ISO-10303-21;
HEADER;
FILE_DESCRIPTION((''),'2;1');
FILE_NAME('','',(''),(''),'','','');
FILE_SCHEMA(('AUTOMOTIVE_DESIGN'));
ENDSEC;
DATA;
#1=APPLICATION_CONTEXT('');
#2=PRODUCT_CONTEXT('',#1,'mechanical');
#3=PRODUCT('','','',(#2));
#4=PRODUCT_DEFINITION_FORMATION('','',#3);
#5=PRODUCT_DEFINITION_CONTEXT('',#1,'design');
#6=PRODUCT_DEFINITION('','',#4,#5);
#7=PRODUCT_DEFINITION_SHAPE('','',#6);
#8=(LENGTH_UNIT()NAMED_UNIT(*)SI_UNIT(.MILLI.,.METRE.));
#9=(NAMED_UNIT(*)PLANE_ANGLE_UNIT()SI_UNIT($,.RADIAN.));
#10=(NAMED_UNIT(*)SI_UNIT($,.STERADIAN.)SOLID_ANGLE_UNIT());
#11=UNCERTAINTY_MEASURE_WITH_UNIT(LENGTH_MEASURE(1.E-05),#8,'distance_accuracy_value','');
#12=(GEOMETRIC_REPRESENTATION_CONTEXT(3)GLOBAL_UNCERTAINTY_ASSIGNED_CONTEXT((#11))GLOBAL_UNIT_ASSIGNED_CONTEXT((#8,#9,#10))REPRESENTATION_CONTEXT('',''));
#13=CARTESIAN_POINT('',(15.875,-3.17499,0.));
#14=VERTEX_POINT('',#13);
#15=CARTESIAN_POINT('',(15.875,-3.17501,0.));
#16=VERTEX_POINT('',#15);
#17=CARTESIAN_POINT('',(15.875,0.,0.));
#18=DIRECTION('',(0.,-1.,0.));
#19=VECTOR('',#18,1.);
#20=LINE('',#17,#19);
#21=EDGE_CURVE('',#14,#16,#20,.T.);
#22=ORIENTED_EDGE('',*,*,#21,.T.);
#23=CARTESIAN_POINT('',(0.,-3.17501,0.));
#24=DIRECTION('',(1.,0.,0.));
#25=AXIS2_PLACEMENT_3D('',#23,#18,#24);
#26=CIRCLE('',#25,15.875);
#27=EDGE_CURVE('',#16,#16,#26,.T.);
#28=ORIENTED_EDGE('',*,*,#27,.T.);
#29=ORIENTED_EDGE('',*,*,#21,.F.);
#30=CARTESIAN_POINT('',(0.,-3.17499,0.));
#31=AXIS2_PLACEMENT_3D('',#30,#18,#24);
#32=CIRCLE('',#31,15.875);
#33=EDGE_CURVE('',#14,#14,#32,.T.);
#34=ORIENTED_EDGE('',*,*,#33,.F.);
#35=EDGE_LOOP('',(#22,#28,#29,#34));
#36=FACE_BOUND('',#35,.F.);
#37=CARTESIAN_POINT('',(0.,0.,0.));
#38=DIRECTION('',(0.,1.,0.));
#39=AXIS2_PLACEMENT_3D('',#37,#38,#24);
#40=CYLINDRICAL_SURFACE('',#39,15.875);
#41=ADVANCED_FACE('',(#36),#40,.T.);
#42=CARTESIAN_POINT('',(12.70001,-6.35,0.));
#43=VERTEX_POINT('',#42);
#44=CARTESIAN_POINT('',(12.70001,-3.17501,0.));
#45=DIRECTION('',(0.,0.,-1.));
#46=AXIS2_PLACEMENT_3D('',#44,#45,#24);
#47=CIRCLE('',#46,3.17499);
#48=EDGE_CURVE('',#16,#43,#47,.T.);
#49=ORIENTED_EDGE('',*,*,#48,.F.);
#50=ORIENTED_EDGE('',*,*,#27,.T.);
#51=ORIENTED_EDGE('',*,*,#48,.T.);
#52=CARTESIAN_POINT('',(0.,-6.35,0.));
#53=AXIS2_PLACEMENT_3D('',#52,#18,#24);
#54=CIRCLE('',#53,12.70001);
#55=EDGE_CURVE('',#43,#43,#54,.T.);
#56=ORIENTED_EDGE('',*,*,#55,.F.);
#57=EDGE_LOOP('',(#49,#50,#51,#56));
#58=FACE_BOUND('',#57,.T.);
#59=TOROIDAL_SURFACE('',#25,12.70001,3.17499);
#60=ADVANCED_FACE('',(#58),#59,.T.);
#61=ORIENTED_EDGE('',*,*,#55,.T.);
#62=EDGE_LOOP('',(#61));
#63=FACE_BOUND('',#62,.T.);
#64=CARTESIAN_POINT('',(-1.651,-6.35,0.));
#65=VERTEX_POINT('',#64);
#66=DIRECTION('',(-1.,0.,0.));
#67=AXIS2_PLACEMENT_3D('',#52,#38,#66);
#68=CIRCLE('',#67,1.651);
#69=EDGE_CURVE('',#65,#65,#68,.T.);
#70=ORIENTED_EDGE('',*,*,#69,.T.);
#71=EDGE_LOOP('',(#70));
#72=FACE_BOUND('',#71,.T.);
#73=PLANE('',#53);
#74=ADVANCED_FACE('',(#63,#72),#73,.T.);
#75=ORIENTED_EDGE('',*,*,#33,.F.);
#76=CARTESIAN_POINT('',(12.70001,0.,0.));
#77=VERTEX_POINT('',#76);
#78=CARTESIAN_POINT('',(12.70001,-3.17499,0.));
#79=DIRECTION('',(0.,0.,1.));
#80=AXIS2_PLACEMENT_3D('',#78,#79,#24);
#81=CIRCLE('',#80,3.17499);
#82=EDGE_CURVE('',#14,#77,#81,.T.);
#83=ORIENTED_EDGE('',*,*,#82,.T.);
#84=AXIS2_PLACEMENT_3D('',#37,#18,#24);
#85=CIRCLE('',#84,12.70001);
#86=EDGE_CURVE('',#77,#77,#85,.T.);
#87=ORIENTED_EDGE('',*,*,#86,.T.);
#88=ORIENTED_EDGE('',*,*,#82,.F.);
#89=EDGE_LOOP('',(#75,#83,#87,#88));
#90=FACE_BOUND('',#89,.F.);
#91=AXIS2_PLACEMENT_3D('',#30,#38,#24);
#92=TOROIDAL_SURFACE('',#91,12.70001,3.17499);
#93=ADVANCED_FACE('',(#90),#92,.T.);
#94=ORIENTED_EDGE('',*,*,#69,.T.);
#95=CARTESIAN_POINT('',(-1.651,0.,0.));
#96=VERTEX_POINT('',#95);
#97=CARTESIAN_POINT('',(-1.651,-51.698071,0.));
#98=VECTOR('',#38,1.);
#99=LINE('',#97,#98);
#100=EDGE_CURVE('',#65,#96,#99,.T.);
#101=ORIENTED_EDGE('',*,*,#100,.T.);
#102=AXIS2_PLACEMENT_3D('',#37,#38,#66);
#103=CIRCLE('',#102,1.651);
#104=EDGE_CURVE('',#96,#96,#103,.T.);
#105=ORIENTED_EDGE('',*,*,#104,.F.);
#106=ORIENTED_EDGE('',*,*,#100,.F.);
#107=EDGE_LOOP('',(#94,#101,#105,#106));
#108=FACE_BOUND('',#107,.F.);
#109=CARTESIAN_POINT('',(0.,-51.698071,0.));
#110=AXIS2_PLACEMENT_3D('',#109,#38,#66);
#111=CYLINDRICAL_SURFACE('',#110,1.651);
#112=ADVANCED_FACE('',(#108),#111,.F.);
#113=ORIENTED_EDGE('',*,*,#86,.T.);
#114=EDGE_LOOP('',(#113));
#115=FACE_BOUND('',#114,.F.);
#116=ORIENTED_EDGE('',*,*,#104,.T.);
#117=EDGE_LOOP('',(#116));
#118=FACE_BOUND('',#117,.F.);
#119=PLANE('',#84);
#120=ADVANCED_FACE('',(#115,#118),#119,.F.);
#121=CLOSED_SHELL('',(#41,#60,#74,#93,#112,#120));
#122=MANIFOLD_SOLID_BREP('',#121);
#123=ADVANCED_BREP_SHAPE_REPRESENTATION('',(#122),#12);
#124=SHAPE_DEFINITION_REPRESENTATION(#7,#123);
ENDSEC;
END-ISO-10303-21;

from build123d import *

# Parameters (mm, degrees)
F0_R     = 15.875
F1_DEPTH = 6.35
F3_D     = 3.302
F4_R     = 3.17499


# Not quite as in the source:
# - a fillet or chamfer is up to 0.001 mm smaller than in the source, because OpenCascade refuses the exact size


with BuildPart() as f1:
    # F0 (on Front) → F1 (new body)
    with BuildSketch(Plane.XZ):
        Circle(F0_R)
    extrude(amount=F1_DEPTH)

    # F3 (through all)
    with Locations(Plane.XZ.offset(6.35)):
        with Locations((0, 0)):
            Hole(F3_D / 2)

    # F4 (radius 3.175 in the source; OpenCascade refuses exactly that, so slightly less here)
    f4_edges = [f1.edges().sort_by_distance(p)[0] for p in [
        (-15.875, -6.35, 0),
        (-15.875, 0, 0),
    ]]
    fillet(f4_edges, radius=F4_R)


solid = f1.part
